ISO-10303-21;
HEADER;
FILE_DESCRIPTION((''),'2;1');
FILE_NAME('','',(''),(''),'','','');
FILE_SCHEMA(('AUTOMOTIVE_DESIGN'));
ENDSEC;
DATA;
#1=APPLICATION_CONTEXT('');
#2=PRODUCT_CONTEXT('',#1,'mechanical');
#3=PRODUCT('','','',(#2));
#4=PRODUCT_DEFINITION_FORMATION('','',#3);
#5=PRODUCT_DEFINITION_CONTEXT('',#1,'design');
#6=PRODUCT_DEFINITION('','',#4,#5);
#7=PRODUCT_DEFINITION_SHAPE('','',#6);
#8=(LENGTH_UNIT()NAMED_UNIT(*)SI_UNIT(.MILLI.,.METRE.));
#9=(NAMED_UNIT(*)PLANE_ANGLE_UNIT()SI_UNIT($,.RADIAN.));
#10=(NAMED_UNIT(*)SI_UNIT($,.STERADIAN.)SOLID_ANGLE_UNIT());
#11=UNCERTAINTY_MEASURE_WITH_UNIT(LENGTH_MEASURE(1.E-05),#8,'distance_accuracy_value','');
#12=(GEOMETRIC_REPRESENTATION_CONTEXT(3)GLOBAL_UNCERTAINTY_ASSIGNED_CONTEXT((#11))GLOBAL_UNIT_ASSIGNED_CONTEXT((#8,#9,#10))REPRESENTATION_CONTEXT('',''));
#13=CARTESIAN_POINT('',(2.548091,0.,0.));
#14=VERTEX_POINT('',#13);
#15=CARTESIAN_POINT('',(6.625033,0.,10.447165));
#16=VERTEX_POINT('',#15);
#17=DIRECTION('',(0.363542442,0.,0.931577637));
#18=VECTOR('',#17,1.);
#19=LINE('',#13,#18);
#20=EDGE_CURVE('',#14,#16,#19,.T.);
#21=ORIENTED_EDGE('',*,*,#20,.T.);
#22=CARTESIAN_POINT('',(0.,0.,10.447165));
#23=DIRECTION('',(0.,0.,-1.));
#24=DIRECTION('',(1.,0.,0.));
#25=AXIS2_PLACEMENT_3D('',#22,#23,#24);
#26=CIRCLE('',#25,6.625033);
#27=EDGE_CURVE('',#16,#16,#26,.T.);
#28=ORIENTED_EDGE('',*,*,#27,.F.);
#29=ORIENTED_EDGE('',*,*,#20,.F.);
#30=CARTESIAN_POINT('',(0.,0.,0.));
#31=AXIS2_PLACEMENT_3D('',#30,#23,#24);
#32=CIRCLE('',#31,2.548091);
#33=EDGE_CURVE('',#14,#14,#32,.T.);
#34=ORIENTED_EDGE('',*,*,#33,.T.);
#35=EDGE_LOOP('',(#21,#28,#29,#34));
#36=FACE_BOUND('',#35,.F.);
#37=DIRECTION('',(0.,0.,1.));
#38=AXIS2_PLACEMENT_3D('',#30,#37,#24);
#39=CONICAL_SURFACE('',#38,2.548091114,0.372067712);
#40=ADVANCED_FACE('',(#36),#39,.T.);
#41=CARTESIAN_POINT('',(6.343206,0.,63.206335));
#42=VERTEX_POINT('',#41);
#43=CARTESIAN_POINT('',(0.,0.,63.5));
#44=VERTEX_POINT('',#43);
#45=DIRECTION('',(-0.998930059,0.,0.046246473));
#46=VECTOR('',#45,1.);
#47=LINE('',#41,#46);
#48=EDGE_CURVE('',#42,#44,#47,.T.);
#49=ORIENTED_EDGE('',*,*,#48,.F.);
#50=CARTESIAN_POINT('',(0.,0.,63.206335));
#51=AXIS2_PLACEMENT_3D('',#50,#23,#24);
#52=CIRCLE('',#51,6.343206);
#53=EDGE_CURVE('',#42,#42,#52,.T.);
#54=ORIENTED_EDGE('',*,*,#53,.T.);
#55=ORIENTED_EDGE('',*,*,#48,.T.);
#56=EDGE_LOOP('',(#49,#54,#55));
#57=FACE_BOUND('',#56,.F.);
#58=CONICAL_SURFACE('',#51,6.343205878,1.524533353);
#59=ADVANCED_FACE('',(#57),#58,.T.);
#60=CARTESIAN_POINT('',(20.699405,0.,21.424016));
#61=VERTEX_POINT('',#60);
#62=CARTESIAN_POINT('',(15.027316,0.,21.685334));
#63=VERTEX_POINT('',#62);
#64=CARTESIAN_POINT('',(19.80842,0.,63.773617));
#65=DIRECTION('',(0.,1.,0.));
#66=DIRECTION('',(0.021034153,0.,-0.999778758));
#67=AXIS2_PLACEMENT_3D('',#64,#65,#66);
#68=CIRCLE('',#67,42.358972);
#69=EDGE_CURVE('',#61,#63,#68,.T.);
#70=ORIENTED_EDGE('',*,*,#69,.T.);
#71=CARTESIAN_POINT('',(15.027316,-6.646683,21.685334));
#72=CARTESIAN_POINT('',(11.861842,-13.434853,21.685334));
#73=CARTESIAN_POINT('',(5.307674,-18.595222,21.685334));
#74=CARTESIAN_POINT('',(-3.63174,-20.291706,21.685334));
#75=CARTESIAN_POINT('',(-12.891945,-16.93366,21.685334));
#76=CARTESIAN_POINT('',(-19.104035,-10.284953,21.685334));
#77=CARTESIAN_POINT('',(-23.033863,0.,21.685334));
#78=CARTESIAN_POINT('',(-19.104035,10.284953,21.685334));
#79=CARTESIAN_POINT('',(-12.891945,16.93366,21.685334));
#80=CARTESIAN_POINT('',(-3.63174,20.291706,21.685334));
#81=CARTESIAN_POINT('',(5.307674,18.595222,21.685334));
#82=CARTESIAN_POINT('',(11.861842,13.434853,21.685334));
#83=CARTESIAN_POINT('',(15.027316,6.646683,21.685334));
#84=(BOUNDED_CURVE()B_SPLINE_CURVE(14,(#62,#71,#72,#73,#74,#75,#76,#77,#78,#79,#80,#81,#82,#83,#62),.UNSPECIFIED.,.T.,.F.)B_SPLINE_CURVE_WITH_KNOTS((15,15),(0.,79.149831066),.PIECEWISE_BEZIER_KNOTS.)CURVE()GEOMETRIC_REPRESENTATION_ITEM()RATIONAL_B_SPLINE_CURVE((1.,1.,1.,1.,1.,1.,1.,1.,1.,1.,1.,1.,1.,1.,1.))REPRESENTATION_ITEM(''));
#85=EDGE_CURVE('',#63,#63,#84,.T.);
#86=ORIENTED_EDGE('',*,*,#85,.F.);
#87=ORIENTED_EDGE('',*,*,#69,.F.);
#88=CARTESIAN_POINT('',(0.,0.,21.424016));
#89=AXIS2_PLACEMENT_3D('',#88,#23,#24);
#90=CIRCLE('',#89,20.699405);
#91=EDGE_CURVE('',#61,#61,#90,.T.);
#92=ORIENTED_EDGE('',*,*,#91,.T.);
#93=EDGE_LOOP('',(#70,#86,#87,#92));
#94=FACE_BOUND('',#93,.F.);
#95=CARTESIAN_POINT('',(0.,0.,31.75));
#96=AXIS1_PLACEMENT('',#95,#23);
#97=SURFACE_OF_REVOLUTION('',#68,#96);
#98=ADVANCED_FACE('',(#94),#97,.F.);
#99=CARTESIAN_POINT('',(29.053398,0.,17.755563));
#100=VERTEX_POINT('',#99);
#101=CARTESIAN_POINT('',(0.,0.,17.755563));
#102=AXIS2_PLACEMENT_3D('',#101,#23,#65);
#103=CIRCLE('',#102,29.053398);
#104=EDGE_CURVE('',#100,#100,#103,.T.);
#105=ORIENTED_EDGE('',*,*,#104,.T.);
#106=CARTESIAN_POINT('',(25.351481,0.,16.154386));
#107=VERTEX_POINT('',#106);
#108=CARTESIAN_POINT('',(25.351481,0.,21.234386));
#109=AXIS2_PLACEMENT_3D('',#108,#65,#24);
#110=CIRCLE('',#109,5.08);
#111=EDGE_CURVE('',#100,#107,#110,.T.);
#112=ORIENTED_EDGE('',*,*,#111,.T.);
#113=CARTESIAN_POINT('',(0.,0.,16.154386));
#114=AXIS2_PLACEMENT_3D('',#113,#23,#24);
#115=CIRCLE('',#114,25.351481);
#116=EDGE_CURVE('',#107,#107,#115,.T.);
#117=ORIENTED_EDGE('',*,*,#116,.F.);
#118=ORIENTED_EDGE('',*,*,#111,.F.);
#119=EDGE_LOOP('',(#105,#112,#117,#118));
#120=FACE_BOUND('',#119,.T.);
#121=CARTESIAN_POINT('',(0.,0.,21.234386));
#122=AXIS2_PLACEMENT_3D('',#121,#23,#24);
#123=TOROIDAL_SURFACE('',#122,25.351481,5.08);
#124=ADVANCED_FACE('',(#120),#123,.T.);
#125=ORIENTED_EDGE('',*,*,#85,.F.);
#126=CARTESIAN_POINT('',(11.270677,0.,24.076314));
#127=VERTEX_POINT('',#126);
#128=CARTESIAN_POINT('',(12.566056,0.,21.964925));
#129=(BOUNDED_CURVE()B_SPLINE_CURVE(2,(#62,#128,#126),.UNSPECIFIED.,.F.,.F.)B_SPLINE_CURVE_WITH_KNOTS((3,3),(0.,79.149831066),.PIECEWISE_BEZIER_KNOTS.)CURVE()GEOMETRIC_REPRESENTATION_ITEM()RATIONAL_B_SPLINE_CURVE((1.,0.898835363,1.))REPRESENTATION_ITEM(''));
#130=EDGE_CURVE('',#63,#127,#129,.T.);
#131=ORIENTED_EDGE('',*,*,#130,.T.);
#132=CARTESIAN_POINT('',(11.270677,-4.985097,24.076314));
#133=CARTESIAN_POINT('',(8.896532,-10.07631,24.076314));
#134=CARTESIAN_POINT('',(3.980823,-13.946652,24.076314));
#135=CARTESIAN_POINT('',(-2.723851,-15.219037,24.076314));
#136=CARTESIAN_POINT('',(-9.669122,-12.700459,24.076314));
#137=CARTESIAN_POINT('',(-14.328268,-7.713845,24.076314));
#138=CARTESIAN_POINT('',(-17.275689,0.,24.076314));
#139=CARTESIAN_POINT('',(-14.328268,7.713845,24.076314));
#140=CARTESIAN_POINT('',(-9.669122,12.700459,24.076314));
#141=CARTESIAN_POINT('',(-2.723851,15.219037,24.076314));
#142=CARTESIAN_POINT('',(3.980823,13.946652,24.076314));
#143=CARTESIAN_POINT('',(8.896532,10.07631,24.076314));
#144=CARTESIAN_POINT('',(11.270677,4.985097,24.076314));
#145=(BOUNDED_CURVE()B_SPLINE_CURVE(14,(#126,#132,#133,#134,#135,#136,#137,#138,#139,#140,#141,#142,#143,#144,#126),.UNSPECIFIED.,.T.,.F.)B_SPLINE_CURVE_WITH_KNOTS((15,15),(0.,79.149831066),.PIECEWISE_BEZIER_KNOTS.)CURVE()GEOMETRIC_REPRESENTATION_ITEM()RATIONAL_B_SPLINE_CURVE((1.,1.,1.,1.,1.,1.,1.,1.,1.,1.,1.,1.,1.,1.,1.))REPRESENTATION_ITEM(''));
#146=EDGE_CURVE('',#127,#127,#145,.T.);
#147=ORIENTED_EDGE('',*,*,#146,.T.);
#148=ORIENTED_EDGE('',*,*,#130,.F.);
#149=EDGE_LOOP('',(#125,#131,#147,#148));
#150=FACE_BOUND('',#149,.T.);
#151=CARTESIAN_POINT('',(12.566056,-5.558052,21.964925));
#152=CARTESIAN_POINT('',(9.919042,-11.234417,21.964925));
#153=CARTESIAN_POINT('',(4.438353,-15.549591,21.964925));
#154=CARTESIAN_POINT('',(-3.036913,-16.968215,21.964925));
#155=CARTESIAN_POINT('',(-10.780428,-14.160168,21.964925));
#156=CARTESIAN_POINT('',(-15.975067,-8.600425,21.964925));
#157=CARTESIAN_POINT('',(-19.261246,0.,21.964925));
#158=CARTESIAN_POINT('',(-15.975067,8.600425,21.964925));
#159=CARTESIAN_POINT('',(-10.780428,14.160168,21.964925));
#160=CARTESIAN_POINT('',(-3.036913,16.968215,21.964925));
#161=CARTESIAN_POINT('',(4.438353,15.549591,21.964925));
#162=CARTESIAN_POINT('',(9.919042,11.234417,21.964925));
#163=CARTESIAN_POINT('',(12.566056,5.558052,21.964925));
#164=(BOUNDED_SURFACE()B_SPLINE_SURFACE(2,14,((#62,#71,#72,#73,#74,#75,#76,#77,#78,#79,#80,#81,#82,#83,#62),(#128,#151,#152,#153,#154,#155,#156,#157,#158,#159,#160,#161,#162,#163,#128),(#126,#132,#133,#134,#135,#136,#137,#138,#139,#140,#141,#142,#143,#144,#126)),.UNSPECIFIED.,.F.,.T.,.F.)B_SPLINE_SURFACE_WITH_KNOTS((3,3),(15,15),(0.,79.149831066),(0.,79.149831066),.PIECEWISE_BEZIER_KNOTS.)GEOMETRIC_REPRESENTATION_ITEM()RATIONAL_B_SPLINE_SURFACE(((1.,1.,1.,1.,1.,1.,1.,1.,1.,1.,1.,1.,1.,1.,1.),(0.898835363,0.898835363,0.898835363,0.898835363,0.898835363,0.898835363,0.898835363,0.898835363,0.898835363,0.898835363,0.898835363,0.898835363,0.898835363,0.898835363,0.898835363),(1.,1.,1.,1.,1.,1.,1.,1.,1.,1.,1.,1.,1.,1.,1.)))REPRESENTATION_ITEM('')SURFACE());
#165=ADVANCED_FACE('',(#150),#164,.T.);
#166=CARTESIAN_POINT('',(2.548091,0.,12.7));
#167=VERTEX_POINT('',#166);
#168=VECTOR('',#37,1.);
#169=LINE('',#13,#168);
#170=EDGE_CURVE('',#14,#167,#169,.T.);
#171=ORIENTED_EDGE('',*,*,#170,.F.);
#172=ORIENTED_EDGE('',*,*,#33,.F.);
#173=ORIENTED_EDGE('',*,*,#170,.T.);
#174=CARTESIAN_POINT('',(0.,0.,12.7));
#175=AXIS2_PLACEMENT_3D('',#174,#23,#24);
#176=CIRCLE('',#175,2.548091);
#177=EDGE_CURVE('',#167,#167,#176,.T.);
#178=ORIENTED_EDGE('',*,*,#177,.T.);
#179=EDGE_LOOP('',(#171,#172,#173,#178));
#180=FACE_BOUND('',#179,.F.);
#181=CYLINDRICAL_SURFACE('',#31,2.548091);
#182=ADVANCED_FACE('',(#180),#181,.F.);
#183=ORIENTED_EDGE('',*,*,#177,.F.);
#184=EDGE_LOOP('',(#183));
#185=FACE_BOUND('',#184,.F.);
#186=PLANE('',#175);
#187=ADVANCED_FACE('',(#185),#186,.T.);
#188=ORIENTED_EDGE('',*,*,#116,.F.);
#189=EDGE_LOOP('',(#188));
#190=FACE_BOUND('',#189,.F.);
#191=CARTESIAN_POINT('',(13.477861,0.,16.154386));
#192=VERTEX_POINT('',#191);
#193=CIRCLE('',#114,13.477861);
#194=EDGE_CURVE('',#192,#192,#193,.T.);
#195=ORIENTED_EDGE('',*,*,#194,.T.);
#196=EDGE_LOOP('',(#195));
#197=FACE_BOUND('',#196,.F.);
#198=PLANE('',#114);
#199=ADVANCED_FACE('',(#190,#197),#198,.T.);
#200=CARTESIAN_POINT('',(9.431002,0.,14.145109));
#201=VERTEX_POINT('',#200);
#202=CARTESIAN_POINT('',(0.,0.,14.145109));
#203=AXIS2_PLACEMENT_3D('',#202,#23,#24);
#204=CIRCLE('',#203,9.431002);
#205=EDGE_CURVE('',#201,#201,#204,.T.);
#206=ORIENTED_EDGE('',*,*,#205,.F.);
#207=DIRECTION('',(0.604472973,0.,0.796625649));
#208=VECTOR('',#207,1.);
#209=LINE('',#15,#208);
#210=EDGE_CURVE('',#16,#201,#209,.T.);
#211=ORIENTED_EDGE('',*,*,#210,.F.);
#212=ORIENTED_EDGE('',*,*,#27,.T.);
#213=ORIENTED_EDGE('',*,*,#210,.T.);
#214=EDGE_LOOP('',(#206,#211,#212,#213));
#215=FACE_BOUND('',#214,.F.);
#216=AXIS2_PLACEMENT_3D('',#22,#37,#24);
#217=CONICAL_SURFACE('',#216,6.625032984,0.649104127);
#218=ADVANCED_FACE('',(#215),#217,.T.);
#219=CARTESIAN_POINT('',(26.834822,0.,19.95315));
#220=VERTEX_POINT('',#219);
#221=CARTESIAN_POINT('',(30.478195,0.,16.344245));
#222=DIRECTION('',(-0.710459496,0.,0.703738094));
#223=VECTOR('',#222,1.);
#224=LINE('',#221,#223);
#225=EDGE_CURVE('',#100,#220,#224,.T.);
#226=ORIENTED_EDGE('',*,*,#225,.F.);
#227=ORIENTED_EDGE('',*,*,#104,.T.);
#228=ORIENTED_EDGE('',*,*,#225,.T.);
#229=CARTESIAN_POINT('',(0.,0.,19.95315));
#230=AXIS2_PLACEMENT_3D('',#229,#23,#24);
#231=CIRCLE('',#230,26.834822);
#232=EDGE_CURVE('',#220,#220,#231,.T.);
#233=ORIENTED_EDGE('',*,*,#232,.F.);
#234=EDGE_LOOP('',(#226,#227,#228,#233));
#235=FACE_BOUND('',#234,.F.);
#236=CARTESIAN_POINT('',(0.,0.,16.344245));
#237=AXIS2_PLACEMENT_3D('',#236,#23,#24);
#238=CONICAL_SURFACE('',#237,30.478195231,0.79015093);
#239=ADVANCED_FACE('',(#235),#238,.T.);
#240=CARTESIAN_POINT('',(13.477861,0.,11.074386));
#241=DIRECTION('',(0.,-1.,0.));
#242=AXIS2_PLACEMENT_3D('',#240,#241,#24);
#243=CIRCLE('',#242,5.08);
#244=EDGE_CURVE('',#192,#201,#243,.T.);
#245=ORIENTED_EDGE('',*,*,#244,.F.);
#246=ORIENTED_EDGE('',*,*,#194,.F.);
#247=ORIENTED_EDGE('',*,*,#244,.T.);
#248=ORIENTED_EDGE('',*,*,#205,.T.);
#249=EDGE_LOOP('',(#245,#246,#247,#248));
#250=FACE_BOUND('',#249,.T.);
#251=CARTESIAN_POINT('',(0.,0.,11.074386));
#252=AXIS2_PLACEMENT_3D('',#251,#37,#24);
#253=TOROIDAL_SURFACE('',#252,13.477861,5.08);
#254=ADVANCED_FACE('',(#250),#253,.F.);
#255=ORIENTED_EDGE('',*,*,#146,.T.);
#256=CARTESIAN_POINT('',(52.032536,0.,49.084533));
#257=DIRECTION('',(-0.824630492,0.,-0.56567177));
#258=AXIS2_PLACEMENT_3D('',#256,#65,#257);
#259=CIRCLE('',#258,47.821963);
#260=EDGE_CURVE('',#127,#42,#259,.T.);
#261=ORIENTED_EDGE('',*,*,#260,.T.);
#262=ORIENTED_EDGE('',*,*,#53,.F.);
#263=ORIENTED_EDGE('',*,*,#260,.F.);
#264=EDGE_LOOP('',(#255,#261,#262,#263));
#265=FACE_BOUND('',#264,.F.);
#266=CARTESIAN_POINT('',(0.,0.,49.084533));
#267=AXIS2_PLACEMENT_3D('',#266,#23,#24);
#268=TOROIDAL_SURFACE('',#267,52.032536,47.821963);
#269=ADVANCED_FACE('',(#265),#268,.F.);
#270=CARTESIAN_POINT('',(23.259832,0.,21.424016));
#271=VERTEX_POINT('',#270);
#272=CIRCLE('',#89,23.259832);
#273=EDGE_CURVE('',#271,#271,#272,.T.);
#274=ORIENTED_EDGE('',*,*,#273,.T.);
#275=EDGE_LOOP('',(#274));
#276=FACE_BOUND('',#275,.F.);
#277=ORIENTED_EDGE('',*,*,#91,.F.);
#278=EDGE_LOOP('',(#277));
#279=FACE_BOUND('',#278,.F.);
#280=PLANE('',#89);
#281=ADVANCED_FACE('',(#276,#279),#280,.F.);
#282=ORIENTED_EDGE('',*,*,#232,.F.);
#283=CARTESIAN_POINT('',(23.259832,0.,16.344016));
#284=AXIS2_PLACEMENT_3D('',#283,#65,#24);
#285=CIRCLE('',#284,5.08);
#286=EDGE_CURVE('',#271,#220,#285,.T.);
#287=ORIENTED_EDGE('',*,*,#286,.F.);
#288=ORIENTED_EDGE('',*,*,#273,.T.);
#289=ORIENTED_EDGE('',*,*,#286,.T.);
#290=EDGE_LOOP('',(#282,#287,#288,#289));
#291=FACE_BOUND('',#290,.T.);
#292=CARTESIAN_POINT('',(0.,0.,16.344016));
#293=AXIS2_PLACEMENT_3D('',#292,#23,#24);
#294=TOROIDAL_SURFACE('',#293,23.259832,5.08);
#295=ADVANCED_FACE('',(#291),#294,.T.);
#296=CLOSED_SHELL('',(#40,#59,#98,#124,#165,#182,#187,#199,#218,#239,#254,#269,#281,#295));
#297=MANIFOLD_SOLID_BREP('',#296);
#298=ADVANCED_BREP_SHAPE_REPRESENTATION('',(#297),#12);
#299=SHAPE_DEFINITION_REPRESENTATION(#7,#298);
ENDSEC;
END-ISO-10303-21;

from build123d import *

# Parameters (mm, degrees)
F2_DEPTH = 12.7
F3_R     = 5.08
F5_R     = 5.08
F6_R     = 5.08


# Not quite as in the source:
# - a fillet or chamfer that OpenCascade refuses, or shapes differently, is made with other operations: its cross-section is extruded or revolved along the edge and cut away or added


with BuildPart() as f1:
    # F0 (on Front) → F1 (revolve)
    with BuildSketch(Plane.XZ):
        with BuildLine():
            Line((6.3432058776, 63.206334895), (0, 63.5))
            Line((0, 63.5), (0, 0))
            Line((0, 0), (2.5480911136, 0))
            Line((2.5480911136, 0), (6.6250329837, 10.4471649975))
            Line((6.6250329837, 10.4471649975), (10.9556252941, 16.1543861032))
            Line((10.9556252941, 16.1543861032), (30.48, 16.1543861032))
            Line((30.48, 16.1543861032), (30.4299078499, 21.4240159839))
            Line((30.4299078499, 21.4240159839), (20.699405237, 21.4240159839))
            ThreePointArc((20.699405237, 21.4240159839), (16.6336106625, 21.5337881018), (12.597086859, 22.0329985023))
            ThreePointArc((12.597086859, 22.0329985023), (4.7528583484, 41.9031506128), (6.3432058776, 63.206334895))
        make_face()
    revolve(axis=Axis((0, 0, 31.75), (0, 0, -1)))

    # F2 (cut): a face of the model
    f2_faces = [f1.faces().sort_by_distance(p)[0] for p in [
        (0, 0, 0),
    ]]
    extrude(f2_faces, amount=-F2_DEPTH, mode=Mode.SUBTRACT)

    # F3
    f3_edges = [f1.edges().sort_by_distance(p)[0] for p in [
        (-10.955625, 0, 16.154386),
        (-30.48, 0, 16.154386),
    ]]
    fillet(f3_edges, radius=F3_R)

    # F4: chamfer of 5.08 on 1 edges, made by hand

    # F4_s1 → F4_t2 (revolve, cut)
    with BuildSketch(Plane.XZ):
        Polygon((30.478195231, 16.3442454843), (25.3499078499, 21.4240159839), (30.4299078499, 21.4240159839), align=None)
    revolve(axis=Axis((0, 0, 21.4240159839), (0, 0, -1)), mode=Mode.SUBTRACT)

    # F5
    f5_edges = [f1.edges().sort_by_distance(p)[0] for p in [
        (-20.699405, 0, 21.424016),
        (-12.597087, 0, 22.032999),
        (16.633611, 0, 21.533788),
    ]]
    fillet(f5_edges, radius=F5_R)

    # F6
    f6_edges = [f1.edges().sort_by_distance(p)[0] for p in [
        (-25.349908, 0, 21.424016),
        (-20.699405, 0, 21.424016),
    ]]
    fillet(f6_edges, radius=F6_R)


solid = f1.part
